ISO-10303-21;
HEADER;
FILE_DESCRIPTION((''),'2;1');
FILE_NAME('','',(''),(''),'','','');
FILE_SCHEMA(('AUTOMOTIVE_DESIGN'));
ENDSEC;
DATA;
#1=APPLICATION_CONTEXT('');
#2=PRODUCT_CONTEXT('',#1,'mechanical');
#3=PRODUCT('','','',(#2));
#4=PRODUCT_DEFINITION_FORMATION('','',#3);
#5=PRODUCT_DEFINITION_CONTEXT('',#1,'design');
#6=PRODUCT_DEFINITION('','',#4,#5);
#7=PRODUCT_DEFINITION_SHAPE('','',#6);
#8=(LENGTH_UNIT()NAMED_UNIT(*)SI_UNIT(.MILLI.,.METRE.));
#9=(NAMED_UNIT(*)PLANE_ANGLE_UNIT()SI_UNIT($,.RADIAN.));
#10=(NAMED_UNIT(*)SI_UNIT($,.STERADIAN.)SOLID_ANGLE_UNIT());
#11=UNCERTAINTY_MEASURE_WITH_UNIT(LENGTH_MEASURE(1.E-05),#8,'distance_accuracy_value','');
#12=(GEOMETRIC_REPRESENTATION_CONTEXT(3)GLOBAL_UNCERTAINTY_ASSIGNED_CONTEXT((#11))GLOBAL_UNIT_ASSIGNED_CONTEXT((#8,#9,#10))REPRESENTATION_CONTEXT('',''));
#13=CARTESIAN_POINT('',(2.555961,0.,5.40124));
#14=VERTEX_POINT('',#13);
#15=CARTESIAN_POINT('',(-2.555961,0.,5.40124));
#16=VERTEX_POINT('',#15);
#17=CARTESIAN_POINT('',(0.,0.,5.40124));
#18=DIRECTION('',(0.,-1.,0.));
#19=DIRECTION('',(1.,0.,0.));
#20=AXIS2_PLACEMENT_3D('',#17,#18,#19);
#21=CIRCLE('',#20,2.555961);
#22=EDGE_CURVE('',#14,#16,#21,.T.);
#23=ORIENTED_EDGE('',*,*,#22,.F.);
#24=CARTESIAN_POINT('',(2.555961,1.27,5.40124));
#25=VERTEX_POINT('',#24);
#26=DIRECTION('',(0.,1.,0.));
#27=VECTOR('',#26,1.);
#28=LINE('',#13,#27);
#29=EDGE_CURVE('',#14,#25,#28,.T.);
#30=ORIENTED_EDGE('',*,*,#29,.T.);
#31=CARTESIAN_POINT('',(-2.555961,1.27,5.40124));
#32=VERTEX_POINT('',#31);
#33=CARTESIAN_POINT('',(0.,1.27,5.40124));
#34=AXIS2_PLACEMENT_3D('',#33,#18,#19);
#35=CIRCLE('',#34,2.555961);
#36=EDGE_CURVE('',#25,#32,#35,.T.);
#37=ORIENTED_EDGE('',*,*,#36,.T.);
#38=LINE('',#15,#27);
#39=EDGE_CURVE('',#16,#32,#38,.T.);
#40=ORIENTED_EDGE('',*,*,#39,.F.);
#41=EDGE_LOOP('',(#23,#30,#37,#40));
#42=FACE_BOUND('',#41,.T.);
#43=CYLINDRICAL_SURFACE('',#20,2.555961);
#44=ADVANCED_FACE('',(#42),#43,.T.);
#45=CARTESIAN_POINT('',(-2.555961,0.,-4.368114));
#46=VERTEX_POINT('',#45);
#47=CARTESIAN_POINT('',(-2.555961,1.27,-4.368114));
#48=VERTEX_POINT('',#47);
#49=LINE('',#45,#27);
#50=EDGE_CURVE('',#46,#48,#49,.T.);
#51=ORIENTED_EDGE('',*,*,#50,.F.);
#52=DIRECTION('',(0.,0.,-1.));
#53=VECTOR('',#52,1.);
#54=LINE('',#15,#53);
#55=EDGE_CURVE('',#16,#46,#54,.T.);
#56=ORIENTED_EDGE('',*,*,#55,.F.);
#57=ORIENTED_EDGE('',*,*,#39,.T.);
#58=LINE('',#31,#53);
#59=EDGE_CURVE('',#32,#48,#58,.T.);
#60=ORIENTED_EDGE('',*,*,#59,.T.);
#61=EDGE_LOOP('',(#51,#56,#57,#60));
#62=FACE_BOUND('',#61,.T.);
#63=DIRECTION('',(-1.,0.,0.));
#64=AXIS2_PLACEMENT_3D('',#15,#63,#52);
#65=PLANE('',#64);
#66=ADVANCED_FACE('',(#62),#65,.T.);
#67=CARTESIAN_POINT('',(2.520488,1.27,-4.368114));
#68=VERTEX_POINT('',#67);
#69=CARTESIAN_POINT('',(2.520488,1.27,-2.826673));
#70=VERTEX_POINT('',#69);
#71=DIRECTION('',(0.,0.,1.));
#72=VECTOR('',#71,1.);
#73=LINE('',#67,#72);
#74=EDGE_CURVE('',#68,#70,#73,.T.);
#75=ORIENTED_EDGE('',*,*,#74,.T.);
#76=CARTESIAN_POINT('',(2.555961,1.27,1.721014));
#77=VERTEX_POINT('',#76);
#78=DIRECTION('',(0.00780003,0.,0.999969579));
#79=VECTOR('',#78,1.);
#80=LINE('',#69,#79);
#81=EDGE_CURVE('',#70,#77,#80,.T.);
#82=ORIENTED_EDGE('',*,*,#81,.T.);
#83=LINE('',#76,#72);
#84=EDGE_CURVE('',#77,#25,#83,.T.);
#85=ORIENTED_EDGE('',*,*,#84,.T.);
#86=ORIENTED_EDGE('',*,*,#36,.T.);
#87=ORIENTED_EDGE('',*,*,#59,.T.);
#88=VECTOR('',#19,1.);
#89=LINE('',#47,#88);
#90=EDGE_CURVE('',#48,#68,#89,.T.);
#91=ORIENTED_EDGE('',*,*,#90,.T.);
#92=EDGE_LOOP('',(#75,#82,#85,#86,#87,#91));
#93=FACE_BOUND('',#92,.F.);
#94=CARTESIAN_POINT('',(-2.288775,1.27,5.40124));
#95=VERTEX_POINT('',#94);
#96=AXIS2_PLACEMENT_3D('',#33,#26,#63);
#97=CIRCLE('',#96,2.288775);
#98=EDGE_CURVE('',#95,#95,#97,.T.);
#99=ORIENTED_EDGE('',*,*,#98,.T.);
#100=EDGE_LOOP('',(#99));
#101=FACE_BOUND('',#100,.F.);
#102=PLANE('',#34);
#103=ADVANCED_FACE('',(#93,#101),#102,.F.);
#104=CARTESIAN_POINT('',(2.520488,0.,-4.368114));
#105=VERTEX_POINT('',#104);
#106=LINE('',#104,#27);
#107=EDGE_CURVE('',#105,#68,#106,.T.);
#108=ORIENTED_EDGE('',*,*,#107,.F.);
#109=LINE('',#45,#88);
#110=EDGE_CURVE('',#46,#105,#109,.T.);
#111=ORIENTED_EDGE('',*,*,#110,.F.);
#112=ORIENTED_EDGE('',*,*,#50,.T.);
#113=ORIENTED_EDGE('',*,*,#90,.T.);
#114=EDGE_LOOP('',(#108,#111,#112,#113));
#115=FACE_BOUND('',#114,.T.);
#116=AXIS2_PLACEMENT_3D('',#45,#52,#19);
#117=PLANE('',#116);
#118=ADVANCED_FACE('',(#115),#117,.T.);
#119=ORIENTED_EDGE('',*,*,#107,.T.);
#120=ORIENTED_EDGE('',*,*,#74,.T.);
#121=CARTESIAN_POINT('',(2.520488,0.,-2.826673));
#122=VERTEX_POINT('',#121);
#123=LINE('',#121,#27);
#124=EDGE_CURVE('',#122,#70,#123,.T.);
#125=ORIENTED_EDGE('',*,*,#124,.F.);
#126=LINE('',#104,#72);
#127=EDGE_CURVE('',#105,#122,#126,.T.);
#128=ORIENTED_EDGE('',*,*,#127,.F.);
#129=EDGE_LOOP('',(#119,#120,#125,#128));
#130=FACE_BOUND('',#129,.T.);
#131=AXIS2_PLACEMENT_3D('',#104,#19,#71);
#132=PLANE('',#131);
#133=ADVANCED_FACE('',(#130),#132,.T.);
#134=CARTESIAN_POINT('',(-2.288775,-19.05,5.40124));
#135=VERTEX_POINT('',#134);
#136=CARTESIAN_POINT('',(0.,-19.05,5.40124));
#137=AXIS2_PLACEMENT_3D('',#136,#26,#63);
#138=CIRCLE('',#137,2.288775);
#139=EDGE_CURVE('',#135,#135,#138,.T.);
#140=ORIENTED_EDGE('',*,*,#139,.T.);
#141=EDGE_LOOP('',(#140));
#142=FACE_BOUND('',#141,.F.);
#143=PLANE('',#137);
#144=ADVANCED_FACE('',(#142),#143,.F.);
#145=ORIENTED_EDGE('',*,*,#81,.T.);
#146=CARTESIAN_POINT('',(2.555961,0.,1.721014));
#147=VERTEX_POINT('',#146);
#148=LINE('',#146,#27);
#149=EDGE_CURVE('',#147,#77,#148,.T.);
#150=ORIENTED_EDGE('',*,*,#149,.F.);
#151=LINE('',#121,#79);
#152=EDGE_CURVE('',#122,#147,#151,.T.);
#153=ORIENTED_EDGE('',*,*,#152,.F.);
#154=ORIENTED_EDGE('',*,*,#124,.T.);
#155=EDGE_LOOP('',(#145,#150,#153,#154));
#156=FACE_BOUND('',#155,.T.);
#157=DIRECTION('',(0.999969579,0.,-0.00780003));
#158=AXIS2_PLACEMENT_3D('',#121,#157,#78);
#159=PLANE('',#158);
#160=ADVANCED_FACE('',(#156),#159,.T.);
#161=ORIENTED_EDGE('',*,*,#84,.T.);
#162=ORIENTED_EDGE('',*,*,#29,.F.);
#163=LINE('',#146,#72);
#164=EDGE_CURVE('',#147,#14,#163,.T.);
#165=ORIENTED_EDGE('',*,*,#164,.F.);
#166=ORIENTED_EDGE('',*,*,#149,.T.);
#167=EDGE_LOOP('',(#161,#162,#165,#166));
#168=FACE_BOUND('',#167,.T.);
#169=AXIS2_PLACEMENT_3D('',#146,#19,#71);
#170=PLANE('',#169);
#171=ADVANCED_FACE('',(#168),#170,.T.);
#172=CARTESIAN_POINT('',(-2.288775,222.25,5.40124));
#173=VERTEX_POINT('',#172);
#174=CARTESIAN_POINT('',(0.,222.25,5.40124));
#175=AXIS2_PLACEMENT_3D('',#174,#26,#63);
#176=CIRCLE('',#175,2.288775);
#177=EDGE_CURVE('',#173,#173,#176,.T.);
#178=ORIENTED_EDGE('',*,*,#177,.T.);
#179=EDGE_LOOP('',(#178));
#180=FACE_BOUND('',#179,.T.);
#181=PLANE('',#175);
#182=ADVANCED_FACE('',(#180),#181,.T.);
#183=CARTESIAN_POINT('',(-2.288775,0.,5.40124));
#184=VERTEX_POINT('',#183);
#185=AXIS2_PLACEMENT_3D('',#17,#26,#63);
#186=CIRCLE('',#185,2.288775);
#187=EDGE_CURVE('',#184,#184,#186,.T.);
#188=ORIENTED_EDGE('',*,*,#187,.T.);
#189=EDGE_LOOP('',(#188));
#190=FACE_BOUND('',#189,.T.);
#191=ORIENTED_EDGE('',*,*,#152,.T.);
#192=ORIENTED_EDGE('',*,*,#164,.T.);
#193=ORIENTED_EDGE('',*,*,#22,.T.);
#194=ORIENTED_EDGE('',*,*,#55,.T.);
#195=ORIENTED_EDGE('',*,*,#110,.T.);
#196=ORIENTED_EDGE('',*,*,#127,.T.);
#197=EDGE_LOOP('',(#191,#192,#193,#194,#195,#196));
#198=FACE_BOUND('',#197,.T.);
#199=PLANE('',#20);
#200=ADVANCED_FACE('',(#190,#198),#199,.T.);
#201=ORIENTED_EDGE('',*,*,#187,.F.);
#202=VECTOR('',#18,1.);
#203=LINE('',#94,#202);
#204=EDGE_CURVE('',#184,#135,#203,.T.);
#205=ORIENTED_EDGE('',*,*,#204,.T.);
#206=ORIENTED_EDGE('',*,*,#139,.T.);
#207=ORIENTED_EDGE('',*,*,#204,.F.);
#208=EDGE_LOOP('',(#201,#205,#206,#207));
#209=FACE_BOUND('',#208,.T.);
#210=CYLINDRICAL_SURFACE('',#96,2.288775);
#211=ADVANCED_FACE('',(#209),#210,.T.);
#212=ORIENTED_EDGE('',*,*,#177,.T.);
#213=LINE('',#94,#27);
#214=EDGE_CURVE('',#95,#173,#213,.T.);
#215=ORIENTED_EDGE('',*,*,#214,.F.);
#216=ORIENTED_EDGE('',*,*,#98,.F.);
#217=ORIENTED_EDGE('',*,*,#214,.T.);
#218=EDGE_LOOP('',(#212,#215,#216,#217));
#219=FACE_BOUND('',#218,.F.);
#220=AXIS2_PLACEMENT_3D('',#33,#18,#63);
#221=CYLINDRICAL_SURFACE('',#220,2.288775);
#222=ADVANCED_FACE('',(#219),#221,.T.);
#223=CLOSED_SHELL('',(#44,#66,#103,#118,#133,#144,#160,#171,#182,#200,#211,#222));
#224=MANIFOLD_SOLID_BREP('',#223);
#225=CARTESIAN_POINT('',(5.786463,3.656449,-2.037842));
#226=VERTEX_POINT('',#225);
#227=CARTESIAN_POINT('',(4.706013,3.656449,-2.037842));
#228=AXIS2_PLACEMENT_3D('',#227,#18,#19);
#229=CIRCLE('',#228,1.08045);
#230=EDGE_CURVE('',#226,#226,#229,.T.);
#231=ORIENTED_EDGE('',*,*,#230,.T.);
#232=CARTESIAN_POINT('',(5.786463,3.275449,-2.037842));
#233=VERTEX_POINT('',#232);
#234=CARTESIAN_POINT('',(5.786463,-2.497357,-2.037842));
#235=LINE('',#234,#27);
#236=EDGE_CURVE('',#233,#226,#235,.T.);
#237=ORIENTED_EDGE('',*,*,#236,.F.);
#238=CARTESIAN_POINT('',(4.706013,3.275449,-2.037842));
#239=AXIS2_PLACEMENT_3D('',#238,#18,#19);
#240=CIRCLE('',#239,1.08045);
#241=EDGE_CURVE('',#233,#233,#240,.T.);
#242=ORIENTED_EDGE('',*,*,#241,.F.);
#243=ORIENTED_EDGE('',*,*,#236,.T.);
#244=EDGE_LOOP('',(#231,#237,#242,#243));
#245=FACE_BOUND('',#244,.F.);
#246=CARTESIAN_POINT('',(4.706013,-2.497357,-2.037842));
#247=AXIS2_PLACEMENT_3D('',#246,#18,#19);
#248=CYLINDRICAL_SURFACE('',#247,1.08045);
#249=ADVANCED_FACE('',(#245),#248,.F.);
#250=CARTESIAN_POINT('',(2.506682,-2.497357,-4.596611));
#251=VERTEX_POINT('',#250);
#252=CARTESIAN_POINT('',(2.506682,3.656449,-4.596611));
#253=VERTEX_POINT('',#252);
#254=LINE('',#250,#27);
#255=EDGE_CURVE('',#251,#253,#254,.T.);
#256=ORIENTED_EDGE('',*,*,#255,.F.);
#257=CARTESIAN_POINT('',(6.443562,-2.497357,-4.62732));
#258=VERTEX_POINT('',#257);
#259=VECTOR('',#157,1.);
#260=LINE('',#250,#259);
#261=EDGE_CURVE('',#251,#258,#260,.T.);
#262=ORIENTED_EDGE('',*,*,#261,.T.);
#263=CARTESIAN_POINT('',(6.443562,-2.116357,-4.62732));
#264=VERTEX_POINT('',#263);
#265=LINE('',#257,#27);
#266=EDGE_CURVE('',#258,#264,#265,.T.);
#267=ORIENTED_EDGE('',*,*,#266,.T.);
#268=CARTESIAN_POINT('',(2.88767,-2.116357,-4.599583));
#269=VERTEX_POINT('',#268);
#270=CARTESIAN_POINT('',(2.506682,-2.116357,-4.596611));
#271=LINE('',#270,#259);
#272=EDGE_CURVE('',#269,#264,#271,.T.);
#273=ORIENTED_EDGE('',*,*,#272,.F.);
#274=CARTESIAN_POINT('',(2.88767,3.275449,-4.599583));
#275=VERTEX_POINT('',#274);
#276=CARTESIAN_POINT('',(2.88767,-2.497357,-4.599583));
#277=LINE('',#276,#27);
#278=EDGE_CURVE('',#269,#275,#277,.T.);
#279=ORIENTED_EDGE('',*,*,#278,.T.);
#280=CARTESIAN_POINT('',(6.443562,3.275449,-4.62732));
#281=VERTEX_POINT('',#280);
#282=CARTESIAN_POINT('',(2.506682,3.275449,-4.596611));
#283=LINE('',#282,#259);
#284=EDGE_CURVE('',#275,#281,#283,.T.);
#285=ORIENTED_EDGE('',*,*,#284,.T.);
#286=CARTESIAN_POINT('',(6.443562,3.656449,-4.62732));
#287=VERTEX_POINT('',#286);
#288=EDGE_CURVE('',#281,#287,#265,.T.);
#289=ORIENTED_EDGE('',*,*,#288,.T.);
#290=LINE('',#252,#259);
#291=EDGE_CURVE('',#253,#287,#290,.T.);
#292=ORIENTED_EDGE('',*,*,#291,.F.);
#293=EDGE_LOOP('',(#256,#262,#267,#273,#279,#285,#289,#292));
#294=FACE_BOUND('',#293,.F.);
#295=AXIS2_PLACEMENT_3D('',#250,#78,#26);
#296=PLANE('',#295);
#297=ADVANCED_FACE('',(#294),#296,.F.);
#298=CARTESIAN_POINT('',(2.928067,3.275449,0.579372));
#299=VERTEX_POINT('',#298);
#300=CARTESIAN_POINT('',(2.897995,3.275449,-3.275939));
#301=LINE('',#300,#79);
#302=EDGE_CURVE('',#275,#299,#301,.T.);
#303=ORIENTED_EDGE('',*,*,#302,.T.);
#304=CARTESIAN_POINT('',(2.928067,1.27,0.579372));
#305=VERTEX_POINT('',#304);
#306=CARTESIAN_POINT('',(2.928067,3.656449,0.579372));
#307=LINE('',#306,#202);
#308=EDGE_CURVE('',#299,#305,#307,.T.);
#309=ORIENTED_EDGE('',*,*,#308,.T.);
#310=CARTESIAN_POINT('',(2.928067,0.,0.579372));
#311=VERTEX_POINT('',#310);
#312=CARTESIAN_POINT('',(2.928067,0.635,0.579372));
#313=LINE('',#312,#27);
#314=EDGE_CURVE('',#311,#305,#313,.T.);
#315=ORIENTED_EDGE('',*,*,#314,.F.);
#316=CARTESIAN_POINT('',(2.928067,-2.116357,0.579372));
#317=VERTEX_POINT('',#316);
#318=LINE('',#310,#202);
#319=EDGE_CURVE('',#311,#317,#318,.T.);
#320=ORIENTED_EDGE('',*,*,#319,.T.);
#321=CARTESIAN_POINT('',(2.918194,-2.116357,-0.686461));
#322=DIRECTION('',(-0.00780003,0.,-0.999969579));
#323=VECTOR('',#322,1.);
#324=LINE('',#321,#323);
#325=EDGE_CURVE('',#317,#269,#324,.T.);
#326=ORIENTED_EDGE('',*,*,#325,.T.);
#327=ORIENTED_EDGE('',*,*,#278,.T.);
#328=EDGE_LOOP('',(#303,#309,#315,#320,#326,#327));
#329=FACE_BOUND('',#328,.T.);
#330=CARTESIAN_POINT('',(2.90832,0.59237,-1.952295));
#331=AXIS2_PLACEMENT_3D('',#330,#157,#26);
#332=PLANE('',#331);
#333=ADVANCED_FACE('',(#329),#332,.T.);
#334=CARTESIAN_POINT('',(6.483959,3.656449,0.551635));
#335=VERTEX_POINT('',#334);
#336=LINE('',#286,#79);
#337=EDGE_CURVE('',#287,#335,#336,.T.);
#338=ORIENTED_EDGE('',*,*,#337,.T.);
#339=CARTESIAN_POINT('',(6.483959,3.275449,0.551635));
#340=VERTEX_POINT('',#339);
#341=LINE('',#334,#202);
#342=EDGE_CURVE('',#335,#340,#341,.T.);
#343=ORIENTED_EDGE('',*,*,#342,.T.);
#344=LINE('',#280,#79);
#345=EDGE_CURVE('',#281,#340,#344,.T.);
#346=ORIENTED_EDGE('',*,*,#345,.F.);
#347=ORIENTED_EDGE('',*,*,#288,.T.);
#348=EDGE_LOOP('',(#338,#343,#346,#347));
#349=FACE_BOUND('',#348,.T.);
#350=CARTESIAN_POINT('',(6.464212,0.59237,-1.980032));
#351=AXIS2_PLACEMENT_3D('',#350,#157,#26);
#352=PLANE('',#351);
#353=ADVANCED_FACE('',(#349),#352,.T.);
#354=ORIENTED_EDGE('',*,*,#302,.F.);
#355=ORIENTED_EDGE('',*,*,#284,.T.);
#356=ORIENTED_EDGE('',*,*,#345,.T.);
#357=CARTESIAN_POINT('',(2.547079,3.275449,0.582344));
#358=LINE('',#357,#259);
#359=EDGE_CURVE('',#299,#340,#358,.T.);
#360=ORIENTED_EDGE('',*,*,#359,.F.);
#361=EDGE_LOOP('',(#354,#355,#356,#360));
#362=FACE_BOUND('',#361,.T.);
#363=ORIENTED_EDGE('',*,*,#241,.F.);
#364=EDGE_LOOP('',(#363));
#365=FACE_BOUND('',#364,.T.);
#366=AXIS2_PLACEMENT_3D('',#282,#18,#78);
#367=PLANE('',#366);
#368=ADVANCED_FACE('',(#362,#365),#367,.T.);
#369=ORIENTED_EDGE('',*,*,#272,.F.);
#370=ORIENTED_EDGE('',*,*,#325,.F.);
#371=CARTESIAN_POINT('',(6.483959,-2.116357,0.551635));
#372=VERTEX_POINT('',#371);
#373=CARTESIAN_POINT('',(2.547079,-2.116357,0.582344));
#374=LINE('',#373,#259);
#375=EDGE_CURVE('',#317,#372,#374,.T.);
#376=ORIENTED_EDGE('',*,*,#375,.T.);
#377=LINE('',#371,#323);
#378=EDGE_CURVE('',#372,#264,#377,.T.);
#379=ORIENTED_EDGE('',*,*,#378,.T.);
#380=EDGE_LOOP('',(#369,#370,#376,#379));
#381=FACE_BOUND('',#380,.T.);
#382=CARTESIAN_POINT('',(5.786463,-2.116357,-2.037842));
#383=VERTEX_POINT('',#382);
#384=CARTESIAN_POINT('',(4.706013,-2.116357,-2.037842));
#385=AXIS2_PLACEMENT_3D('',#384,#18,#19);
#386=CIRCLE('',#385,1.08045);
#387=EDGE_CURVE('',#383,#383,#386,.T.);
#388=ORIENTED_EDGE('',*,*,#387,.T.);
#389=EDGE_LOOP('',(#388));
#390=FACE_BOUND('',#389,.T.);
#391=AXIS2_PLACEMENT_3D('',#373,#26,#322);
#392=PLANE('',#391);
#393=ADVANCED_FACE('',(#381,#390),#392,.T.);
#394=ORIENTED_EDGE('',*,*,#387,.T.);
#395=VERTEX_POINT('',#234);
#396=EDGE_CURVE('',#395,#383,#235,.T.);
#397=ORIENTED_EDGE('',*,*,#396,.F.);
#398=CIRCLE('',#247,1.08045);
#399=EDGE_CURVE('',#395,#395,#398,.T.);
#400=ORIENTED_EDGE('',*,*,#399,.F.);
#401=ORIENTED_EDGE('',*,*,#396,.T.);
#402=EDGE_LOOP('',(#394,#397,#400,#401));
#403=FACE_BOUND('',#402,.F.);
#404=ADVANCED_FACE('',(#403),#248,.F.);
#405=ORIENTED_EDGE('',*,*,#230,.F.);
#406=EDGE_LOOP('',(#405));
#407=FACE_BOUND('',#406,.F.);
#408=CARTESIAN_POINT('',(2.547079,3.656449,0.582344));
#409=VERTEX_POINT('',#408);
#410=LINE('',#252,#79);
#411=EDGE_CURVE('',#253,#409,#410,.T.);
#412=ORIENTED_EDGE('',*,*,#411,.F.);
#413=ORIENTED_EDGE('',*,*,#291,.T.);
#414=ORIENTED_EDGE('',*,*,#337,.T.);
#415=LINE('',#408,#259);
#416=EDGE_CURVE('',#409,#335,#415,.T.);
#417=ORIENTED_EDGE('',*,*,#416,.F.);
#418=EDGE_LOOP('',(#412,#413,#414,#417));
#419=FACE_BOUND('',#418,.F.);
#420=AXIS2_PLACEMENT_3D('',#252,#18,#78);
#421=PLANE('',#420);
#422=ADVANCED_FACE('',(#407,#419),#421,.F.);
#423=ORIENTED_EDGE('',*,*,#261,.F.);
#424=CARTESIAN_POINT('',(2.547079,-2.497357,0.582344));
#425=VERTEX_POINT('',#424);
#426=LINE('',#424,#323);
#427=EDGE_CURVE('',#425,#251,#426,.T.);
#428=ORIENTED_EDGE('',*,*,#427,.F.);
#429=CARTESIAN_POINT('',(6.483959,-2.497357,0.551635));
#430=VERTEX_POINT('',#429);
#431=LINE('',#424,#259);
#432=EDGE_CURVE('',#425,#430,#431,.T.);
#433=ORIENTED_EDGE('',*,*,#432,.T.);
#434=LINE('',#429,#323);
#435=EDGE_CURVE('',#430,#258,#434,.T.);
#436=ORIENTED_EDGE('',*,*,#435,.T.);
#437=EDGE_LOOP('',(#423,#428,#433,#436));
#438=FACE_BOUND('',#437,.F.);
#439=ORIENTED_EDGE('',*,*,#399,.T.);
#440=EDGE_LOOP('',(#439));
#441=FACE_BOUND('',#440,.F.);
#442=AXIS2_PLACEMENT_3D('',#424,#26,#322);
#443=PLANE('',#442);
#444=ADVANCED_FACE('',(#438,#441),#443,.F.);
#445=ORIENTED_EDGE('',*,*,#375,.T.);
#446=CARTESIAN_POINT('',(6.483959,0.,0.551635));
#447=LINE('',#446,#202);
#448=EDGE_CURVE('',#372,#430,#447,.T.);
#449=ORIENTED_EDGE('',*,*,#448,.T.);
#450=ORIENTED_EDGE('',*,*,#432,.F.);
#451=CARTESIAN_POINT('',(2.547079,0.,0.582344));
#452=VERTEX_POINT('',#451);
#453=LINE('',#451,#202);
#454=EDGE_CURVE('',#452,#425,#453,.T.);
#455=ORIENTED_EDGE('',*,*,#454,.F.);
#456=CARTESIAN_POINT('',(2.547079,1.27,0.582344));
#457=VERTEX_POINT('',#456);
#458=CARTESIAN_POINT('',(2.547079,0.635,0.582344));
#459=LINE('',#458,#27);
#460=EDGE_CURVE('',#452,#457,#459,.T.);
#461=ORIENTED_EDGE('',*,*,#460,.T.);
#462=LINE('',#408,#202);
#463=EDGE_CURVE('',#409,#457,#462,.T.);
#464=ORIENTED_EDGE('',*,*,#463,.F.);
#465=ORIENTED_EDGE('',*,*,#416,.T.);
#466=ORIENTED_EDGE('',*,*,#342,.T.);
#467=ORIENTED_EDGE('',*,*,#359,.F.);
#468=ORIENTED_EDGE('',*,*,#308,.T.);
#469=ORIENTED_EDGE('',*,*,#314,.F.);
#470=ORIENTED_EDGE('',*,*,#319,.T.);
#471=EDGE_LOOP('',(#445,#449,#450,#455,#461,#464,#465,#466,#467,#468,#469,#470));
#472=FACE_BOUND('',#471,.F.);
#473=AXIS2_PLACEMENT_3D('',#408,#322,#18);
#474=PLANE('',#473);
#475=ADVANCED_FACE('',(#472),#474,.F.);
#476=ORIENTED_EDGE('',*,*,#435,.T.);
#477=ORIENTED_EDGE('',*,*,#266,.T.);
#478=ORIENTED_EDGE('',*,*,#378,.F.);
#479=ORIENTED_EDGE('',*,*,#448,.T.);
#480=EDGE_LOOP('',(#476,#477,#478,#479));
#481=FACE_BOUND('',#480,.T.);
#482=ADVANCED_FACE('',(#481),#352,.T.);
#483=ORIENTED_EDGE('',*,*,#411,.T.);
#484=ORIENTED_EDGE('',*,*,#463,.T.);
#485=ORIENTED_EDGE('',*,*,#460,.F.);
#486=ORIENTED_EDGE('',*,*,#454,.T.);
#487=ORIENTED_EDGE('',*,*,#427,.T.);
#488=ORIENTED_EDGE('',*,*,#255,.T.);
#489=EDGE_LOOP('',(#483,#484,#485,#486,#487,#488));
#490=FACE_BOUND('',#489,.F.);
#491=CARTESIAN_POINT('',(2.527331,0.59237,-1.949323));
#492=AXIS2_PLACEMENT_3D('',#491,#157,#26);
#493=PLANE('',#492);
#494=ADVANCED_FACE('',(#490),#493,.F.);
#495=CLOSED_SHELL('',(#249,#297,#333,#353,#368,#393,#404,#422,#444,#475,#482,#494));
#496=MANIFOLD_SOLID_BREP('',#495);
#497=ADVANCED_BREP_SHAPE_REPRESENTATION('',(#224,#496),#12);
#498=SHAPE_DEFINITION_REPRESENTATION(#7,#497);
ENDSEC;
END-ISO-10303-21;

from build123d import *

# Parameters (mm, degrees)
F1_DEPTH      = 1.27
F2_R          = 2.2887754184
F3_DEPTH      = 220.98
F3_DEPTH_BACK = 20.32
F4_W          = 1.27
F4_H          = 3.4091206923
F5_DEPTH      = 3.937
F6_T          = -0.381
F7_R          = 1.080450049
F8_DEPTH      = 11.176


# Not quite as in the source:
# - a feature names something its author has since deleted; it is built from what else it names


with BuildPart() as f1:
    # F0 (on Front) → F1 (new body)
    with BuildSketch(Plane.XZ):
        with BuildLine():
            ThreePointArc((-2.5559609307, 5.4012401961), (0, 2.8452792654), (2.5559609307, 5.4012401961))
            ThreePointArc((2.5559609307, 5.4012401961), (0, 7.9572011268), (-2.5559609307, 5.4012401961))
        make_face()
        with BuildLine():
            Line((2.5559609307, 1.721014436), (2.5559609307, 5.4012401961))
            ThreePointArc((2.5559609307, 5.4012401961), (0, 2.8452792654), (-2.5559609307, 5.4012401961))
            Line((-2.5559609307, 5.4012401961), (-2.5559609307, 4.3758706689))
            Line((-2.5559609307, 4.3758706689), (-2.5559609307, -2.8266729787))
            Line((-2.5559609307, -2.8266729787), (-2.5559609307, -4.3681138195))
            Line((-2.5559609307, -4.3681138195), (2.5204877513, -4.3681138195))
            Line((2.5204877513, -4.3681138195), (2.5204877513, -2.8266729787))
            Line((2.5204877513, -2.8266729787), (2.5559609307, 1.721014436))
        make_face()
    extrude(amount=-F1_DEPTH)

    # F2 (on face) → F3 (join, two sides)
    with BuildSketch(Plane(origin=(0, 1.27, 0), x_dir=(-1, 0, 0), z_dir=(0, 1, 0))) as f3_sk:
        with Locations((0, 5.4012401961)):
            Circle(F2_R)
    extrude(amount=F3_DEPTH)
    extrude(f3_sk.sketch, amount=-F3_DEPTH_BACK)


with BuildPart() as f5:
    # F4 (on face) → F5 (new body)
    with BuildSketch(Plane(origin=(2.5423818682, 0, -0.0198312593), x_dir=(0, 1, 0), z_dir=(0.9999695793, 0, -0.0078000304))):
        Polygon((-2.497356755, -4.576918826), (3.6564493494, -4.576918826), (3.6564493494, 0.6021935842), (1.27, 0.6021935842), (1.27, -2.8069271081), (0, -2.8069271081), (0, 0.6021935842), (-2.497356755, 0.6021935842), align=None)
        with Locations((0.635, -1.102366762)):
            Rectangle(F4_W, F4_H)
    extrude(amount=F5_DEPTH)

    # F6
    f6_openings = [f5.faces().sort_by_distance(p)[0] for p in [
        (6.463761, 0.579546, -2.037842),
        (4.515519, 0.579546, 0.56699),
        (4.475122, 0.579546, -4.611965),
    ]]
    offset(amount=F6_T, openings=f6_openings)

    # F7 (on face) → F8 (cut)
    with BuildSketch(Plane.XZ.offset(2.497356755)):
        with Locations((4.7060133182, -2.0378421431)):
            Circle(F7_R)
    extrude(amount=-F8_DEPTH, mode=Mode.SUBTRACT)


solid = Compound([f1.part, f5.part])
